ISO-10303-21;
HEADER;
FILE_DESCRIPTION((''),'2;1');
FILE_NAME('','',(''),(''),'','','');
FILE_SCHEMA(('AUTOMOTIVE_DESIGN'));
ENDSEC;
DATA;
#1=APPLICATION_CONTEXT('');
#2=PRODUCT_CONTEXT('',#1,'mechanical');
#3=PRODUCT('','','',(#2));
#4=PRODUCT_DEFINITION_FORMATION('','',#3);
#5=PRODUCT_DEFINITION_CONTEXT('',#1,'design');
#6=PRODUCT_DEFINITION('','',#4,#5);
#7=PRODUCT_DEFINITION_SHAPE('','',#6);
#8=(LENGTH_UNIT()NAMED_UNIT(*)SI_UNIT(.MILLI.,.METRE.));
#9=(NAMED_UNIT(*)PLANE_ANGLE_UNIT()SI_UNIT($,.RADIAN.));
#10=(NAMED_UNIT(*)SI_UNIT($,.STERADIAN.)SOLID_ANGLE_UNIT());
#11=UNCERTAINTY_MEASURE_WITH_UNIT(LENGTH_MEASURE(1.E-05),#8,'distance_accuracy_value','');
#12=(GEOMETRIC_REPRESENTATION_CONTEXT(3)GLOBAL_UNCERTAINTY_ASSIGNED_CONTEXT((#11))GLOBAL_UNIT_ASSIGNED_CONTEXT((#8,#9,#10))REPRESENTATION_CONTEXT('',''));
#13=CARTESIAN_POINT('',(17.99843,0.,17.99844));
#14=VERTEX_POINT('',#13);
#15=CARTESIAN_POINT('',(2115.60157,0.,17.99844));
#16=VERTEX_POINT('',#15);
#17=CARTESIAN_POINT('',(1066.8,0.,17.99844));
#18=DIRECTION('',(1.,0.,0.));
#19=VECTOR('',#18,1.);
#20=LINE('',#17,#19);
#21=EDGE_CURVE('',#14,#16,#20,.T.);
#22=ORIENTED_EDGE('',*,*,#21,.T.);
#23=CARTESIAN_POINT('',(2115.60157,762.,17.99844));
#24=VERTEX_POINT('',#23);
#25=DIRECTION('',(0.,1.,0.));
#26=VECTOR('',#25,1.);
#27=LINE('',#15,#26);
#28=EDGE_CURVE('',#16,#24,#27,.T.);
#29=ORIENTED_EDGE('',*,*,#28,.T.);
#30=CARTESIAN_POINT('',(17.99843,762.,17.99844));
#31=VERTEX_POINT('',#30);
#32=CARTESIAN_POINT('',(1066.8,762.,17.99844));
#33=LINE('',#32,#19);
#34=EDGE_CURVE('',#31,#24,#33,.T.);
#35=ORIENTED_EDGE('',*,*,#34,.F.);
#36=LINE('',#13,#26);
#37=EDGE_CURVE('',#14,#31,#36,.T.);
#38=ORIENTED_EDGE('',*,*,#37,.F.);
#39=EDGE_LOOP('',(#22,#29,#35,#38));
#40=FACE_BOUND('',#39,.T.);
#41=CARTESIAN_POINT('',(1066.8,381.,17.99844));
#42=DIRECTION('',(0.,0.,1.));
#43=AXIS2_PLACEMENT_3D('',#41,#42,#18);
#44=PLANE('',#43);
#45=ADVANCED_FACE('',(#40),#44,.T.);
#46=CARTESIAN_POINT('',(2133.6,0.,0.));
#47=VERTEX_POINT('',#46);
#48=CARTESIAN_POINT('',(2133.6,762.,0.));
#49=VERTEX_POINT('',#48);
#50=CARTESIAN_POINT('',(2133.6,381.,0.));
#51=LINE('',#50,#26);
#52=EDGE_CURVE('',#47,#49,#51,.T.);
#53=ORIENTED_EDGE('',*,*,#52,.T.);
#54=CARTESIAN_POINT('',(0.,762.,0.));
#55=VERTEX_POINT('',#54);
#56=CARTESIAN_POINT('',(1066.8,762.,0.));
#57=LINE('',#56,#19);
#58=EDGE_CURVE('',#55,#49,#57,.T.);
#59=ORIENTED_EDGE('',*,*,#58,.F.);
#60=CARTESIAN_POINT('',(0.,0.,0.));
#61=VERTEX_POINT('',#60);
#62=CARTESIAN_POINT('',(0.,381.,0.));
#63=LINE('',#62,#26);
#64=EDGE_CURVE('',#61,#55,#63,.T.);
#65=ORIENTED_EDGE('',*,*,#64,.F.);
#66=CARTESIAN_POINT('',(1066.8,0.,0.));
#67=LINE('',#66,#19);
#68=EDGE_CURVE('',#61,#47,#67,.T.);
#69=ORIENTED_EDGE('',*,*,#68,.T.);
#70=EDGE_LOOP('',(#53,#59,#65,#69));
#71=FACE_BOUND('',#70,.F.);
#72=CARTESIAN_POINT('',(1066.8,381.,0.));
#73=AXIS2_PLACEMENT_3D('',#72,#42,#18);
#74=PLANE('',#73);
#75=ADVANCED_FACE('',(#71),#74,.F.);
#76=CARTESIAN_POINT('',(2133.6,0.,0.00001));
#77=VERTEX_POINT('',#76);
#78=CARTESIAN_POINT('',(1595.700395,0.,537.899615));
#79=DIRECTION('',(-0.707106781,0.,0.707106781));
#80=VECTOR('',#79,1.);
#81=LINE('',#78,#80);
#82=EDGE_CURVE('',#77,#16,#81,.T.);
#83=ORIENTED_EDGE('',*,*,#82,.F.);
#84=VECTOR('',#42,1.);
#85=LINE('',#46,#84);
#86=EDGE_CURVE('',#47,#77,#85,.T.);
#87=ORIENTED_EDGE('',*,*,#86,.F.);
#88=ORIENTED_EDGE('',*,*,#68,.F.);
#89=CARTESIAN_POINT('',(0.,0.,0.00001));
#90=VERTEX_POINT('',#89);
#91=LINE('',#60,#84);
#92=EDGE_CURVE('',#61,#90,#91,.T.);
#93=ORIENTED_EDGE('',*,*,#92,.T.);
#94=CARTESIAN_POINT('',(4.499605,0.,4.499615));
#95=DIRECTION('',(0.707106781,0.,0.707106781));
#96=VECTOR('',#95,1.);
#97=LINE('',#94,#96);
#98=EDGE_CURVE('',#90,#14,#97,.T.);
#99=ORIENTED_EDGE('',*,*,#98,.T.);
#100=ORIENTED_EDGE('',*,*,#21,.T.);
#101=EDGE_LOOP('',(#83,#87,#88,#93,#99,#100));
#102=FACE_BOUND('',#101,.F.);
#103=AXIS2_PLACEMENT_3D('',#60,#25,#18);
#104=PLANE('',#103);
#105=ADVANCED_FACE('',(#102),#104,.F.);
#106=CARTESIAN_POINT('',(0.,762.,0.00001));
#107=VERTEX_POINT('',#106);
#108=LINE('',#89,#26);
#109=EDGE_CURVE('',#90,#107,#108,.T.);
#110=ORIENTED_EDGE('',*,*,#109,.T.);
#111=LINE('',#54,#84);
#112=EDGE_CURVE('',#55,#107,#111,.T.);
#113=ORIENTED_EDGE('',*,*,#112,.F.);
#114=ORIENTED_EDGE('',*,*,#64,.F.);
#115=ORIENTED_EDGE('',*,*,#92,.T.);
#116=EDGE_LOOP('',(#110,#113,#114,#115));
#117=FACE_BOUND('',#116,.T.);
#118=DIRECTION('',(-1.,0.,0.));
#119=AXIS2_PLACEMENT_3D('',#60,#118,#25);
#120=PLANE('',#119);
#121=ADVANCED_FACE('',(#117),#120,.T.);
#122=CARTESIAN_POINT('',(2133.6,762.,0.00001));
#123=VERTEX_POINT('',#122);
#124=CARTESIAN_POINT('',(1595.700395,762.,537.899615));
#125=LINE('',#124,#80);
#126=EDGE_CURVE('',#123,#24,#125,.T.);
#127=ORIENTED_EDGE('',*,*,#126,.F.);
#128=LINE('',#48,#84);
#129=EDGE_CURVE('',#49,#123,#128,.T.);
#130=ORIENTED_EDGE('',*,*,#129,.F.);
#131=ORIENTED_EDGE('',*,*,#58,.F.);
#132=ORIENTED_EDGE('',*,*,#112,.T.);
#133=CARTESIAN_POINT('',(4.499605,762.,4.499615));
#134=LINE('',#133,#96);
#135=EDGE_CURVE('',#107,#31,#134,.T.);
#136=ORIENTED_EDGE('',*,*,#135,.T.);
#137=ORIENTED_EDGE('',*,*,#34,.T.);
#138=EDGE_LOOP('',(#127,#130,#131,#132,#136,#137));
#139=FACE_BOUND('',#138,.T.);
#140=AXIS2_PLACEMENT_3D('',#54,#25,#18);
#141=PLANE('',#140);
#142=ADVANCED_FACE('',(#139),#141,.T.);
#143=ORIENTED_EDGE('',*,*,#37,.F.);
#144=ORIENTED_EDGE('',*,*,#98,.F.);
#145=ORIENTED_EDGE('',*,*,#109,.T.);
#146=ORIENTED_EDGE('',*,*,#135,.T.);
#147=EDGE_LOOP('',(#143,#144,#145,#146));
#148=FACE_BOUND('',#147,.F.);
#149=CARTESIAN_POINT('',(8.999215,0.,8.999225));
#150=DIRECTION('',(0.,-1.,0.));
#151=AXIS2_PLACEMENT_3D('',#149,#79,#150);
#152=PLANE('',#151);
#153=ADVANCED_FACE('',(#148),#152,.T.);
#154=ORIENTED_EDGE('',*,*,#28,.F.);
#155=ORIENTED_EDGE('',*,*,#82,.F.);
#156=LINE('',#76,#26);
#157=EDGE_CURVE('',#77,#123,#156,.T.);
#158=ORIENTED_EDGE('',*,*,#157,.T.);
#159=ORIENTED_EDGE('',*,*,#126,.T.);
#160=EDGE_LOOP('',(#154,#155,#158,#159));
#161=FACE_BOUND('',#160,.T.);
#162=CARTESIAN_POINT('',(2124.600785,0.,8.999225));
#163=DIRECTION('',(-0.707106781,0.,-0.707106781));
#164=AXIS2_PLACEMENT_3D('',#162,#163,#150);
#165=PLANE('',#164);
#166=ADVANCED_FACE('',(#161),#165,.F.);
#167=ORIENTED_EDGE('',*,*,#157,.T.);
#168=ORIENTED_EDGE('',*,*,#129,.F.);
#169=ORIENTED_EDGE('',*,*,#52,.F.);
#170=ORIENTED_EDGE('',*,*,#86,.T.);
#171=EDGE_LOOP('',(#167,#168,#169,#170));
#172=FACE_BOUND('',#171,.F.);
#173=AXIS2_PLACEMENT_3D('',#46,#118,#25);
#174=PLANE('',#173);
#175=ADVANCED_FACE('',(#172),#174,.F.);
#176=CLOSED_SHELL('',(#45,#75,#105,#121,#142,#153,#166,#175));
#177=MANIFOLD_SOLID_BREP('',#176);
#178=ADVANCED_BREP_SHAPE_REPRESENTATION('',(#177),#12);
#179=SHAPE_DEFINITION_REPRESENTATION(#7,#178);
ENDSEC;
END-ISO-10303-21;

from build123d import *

# Parameters (mm, degrees)
F0_W     = 2133.6
F0_H     = 762
F1_DEPTH = 17.99844
F2_SIZE  = 17.99843


# Not quite as in the source:
# - a fillet or chamfer is up to 0.001 mm smaller than in the source, because OpenCascade refuses the exact size


with BuildPart() as f1:
    # F0 (on Top) → F1 (new body)
    with BuildSketch(Plane.XY):
        with Locations((1066.8, 381)):
            Rectangle(F0_W, F0_H)
    extrude(amount=F1_DEPTH)

    # F2 (size 17.99844 in the source; OpenCascade refuses exactly that, so slightly less here)
    f2_edges = [f1.edges().sort_by_distance(p)[0] for p in [
        (2133.6, 381, 17.99844),
        (0, 381, 17.99844),
    ]]
    chamfer(f2_edges, length=F2_SIZE)


solid = f1.part
